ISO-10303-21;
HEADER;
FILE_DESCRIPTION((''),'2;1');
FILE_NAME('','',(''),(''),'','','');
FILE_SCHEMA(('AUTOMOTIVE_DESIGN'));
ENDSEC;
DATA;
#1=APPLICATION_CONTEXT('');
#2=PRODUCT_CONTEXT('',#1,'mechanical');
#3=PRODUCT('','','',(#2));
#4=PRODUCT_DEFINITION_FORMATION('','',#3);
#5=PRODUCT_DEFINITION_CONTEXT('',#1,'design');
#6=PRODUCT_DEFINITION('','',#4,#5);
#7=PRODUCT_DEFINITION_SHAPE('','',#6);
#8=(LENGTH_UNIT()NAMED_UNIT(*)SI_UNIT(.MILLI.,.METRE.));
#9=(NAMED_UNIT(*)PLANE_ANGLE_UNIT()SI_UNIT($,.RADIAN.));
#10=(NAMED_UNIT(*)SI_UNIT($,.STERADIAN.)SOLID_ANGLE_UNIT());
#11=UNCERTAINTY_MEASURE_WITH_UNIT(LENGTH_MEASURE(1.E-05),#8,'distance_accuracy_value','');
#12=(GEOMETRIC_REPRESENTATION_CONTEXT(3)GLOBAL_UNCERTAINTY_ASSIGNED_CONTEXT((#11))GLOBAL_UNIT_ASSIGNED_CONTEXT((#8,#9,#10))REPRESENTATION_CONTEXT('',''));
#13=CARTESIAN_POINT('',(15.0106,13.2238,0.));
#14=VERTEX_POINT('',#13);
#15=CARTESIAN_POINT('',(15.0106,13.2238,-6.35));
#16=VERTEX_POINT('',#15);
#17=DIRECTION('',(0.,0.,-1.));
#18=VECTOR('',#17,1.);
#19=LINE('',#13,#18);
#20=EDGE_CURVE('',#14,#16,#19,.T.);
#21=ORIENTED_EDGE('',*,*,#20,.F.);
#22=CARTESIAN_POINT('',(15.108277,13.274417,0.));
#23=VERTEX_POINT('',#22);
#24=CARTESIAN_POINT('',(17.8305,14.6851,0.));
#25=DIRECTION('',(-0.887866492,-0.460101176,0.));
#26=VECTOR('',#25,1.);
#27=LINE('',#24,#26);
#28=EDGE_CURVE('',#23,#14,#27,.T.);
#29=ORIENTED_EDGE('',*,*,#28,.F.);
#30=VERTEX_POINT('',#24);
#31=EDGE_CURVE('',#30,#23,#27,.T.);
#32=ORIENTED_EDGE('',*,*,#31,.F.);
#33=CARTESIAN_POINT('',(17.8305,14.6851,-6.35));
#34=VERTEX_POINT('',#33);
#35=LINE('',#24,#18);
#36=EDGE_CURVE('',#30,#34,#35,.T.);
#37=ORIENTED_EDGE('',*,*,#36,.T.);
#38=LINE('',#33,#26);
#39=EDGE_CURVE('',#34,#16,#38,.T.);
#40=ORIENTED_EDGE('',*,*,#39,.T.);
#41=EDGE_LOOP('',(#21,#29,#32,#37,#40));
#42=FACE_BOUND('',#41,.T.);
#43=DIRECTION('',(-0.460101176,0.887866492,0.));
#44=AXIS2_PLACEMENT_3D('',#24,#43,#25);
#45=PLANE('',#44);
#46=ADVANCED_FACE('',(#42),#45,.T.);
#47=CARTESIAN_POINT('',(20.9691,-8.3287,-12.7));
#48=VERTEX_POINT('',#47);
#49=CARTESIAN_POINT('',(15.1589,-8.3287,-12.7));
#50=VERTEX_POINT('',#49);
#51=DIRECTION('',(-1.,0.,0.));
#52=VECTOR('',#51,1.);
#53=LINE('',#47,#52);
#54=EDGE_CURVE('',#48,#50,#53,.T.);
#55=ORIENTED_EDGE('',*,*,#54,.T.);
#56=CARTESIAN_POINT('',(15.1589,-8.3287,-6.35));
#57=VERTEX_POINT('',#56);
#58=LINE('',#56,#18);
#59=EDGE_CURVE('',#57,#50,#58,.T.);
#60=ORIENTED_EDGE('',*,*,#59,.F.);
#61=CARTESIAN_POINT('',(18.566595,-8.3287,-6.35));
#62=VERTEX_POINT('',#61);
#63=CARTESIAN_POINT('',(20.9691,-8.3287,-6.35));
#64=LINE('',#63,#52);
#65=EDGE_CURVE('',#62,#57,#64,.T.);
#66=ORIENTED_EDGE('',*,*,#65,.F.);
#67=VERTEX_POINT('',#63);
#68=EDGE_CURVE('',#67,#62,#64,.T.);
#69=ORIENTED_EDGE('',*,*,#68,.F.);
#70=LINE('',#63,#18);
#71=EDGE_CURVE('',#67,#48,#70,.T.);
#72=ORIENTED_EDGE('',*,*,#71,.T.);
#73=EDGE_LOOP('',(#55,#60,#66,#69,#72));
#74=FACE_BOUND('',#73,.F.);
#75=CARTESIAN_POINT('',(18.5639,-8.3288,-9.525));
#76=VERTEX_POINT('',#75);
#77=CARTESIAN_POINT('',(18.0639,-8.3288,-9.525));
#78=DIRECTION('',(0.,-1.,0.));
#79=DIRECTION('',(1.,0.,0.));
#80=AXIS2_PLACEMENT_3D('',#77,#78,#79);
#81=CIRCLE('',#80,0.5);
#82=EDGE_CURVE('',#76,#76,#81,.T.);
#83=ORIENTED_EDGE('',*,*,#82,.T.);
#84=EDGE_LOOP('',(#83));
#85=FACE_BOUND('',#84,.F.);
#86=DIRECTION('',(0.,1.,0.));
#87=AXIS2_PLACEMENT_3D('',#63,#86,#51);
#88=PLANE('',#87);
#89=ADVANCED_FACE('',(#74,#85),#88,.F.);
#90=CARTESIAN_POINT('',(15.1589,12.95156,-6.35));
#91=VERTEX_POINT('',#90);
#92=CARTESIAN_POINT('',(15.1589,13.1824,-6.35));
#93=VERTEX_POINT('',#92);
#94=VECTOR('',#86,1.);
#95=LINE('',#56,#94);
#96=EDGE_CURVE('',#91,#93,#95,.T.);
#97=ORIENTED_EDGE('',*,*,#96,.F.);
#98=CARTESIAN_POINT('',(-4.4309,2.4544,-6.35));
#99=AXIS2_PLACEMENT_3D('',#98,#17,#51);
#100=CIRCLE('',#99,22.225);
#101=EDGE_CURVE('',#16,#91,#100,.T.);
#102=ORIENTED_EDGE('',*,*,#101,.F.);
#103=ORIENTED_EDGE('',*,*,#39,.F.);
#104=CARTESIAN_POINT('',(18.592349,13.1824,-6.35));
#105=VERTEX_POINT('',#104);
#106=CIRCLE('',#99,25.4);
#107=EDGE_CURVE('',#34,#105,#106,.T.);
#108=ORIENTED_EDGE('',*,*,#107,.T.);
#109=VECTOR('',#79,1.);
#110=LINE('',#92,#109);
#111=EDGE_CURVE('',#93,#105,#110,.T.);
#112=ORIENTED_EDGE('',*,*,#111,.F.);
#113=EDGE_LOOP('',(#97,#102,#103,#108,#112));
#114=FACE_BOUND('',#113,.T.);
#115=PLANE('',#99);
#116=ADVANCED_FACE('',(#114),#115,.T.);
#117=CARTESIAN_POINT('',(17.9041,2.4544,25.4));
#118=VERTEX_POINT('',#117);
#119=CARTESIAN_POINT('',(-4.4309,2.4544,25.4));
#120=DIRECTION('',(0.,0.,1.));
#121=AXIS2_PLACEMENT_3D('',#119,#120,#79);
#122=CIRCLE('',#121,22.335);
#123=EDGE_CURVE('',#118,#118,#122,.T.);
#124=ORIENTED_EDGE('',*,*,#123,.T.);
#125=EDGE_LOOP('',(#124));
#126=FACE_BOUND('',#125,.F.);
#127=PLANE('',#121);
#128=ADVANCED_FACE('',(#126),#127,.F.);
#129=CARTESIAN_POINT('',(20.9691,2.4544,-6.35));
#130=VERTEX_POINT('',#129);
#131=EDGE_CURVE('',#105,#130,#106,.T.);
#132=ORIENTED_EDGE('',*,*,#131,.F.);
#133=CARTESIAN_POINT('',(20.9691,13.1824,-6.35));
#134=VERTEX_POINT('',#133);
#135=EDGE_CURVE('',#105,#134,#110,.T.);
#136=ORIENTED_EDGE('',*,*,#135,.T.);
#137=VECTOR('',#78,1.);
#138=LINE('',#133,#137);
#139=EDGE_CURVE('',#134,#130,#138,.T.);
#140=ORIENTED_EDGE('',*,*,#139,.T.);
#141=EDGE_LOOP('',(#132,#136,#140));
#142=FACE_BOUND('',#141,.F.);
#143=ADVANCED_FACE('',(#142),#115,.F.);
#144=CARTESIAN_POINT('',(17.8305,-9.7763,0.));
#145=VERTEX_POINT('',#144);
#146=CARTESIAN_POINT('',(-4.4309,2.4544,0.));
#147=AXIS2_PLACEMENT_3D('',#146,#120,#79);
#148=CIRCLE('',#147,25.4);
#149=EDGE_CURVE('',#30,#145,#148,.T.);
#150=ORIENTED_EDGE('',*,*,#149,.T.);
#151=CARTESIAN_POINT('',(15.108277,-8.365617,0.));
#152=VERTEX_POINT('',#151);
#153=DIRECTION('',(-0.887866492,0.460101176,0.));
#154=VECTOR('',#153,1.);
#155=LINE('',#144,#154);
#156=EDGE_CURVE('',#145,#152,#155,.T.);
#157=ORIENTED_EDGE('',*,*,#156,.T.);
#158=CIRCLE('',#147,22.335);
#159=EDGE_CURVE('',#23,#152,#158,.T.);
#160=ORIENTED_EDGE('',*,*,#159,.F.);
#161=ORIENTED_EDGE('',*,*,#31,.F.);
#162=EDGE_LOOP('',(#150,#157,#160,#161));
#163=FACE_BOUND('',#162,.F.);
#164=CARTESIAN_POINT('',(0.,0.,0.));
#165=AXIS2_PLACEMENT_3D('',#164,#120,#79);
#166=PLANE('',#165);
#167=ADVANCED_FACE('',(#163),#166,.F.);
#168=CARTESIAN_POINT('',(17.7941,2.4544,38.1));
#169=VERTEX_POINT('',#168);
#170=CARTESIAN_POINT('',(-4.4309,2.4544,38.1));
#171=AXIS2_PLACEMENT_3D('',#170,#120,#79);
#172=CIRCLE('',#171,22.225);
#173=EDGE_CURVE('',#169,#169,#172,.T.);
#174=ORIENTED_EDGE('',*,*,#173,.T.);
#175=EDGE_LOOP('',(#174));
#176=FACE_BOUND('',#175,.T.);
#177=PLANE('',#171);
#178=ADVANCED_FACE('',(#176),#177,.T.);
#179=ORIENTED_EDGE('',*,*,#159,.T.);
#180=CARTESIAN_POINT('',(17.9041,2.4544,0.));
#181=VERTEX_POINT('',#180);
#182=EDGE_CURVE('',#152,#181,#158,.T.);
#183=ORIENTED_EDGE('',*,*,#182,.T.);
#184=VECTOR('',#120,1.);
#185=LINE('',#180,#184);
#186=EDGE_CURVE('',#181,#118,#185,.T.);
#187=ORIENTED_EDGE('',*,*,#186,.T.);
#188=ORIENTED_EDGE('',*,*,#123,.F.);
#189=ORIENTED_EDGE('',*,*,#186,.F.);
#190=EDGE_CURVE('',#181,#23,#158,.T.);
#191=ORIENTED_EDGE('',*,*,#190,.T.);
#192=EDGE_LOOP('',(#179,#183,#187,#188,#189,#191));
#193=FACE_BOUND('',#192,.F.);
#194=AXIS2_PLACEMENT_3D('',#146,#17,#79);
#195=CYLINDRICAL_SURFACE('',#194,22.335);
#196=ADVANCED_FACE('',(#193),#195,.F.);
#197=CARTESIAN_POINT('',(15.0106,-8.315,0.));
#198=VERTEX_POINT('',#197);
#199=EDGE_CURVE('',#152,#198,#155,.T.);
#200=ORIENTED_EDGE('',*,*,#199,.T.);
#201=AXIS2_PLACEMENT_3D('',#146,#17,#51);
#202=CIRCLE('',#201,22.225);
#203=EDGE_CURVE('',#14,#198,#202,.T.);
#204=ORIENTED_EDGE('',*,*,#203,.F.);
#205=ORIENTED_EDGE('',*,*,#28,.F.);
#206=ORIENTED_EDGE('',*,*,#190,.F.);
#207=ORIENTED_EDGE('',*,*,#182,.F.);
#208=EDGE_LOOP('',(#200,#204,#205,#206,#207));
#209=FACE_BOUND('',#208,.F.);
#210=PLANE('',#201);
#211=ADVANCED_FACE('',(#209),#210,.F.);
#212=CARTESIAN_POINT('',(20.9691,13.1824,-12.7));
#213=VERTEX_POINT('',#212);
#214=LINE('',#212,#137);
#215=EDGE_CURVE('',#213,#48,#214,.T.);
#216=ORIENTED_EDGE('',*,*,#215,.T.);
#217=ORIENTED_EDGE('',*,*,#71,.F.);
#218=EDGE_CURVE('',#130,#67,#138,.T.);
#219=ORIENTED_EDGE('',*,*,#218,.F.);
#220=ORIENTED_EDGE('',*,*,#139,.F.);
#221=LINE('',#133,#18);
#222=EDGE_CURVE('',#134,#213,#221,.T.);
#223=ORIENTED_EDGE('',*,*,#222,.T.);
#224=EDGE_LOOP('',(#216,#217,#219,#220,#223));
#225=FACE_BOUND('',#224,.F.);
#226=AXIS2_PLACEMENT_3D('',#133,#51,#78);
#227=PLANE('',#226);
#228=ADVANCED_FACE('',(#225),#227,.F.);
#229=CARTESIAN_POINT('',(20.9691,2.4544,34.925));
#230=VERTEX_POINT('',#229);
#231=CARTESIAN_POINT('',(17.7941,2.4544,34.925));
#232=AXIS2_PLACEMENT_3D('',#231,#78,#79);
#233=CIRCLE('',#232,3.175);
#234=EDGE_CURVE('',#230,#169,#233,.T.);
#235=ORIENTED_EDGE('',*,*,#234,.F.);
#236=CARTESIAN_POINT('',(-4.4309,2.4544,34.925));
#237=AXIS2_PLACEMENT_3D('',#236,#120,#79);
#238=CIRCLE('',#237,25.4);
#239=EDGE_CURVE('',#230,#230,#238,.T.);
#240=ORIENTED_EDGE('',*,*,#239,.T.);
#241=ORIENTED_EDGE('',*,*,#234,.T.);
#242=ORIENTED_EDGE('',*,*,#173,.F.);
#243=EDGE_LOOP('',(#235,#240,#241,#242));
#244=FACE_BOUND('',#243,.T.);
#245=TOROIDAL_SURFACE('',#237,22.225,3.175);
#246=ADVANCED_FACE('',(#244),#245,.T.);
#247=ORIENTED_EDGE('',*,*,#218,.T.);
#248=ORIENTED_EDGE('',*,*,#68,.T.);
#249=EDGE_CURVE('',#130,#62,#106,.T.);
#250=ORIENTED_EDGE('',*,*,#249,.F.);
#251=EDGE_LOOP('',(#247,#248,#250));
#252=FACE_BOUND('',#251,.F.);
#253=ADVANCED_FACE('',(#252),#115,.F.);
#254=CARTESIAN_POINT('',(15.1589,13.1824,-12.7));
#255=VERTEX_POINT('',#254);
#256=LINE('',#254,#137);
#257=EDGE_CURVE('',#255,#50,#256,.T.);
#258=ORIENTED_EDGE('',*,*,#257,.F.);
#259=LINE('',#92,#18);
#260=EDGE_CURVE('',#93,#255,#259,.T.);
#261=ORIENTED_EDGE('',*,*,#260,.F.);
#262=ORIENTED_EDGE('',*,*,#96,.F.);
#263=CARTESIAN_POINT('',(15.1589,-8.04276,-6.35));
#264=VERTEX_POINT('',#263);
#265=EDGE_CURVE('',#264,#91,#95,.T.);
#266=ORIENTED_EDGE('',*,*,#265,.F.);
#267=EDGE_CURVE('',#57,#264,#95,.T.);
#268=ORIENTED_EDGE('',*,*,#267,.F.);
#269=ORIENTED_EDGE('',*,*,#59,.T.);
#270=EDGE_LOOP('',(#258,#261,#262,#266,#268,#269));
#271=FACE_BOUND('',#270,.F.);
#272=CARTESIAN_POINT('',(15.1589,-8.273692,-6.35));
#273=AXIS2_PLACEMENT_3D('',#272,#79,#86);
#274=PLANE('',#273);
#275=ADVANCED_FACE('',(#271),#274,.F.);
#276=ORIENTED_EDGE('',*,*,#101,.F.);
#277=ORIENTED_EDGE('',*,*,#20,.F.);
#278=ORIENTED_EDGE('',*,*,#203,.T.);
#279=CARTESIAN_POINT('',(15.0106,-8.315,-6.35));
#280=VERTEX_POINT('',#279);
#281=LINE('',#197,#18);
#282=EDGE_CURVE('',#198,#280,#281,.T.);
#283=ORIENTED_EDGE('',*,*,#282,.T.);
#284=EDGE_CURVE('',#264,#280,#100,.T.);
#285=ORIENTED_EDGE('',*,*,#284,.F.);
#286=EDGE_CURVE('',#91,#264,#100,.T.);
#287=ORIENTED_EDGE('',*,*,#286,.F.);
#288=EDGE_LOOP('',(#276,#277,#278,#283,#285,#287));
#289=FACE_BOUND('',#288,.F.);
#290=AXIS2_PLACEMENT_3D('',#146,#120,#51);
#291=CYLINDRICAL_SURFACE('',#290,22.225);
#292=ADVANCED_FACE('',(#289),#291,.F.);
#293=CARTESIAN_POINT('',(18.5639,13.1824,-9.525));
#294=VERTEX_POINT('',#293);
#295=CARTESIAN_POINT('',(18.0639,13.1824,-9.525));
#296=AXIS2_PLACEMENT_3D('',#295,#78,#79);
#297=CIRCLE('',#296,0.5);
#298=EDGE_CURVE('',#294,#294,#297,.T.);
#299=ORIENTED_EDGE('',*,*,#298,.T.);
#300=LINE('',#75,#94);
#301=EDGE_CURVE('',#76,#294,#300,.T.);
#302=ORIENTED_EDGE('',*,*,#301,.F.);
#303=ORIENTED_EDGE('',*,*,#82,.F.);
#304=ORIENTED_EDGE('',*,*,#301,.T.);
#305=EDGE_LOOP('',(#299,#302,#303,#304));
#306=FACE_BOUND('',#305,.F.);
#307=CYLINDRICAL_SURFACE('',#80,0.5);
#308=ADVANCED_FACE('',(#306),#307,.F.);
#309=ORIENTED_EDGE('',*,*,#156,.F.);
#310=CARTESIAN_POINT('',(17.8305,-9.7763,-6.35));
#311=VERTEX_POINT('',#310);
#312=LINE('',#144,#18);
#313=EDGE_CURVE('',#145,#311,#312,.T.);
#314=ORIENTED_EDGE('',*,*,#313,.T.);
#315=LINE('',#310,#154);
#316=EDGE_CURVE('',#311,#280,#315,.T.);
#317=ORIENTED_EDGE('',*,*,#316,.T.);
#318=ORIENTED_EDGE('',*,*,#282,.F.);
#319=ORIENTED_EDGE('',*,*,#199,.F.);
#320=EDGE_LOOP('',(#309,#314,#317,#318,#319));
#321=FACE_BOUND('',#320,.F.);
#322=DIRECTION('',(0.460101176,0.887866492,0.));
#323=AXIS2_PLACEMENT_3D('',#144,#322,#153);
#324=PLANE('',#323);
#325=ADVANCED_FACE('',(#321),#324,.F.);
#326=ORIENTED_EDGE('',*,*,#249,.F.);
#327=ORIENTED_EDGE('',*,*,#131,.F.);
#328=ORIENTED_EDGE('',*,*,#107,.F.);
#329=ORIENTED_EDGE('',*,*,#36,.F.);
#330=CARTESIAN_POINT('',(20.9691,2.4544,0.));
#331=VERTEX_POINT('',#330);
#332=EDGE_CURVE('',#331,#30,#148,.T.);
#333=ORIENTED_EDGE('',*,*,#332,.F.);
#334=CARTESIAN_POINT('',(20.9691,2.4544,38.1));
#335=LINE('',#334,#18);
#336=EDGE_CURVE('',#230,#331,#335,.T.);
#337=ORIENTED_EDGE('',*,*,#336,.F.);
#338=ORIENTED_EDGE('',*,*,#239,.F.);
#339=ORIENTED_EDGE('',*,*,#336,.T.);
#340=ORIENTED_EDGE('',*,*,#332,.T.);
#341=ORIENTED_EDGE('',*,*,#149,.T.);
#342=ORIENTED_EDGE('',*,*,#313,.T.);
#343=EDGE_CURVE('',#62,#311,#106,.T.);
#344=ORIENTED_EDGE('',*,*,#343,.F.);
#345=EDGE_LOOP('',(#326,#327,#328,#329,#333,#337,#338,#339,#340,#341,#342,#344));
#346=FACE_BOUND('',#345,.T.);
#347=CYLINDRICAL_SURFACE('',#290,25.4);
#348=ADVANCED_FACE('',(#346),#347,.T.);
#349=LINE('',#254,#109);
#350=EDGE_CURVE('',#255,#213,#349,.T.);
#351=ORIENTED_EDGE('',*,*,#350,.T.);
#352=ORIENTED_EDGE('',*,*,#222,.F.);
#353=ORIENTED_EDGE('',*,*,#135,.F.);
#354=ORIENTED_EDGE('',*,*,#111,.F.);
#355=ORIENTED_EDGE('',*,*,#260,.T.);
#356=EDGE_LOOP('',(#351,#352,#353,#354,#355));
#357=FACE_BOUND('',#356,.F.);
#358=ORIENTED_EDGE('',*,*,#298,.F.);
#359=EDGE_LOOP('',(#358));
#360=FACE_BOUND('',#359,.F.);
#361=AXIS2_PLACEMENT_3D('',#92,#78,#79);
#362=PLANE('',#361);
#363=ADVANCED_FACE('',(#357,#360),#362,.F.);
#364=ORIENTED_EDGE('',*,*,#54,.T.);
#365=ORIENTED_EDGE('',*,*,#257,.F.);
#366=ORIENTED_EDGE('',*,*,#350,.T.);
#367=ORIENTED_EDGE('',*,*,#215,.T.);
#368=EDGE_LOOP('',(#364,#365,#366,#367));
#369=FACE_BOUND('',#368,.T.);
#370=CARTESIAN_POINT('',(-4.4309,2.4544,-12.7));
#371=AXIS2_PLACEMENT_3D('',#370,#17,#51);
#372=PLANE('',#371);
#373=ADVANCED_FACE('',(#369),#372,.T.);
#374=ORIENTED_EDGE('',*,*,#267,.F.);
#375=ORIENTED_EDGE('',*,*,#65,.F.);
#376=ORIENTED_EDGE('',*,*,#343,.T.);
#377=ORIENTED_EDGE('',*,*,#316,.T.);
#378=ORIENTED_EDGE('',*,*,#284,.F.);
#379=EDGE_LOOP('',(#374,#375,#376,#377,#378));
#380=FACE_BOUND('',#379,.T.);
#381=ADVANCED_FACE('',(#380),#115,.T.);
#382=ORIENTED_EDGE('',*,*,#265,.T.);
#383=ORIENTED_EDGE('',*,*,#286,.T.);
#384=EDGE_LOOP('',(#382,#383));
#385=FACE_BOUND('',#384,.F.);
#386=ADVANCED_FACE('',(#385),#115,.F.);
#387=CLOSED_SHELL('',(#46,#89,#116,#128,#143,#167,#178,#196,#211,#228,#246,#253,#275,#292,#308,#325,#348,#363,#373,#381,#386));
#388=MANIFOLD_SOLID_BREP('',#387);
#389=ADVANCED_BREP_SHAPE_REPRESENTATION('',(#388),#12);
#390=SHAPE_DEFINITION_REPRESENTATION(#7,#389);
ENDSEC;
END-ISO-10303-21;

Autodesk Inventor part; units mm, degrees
ref_plane "YZ Plane" through (0, 0, 0) normal (1, 0, 0) x (0, 1, 0)
ref_plane "XZ Plane" through (0, 0, 0) normal (0, 1, 0) x (-1, 0, 0)
ref_plane "XY Plane" through (0, 0, 0) normal (0, 0, 1) x (1, 0, 0)
sketch "Sketch1" plane through (0, 0, 0) normal (0, 0, 1) x (1, 0, 0)
  circle A0 centre (-4.4309, 2.4544) radius 22.335
  circle A1 centre (-4.4309, 2.4544) radius 25.4
  point P0 (0, 0)
  dimension "d0" = 44.67
  dimension "d1" = 50.8
extrude "Extrusion1" add sketch "Sketch1" along normal blind 25.4
sketch "Sketch2" plane through (-4.4309, 2.4544, 25.4) normal (0, 0, 1) x (1, 0, 0)
  circle A0 centre (0, 0) radius 25.4
  point P0 (4.4309, -2.4544)
extrude "Extrusion2" add sketch "Sketch2" along normal blind 12.7
fillet "Fillet1" radius 3.175 1 edges at (-29.8309, 2.4544, 38.1)
sketch "Sketch3" plane through (-4.4309, 2.4544, 0) normal (0, 0, -1) x (-1, 0, 0)
  circle A0 centre (0, 0) radius 25.4 projected
  arc A1 (-22.2614, 12.2307) -> (-22.2614, -12.2307) centre (0, 0) ccw
  line L0 (-22.2614, 12.2307) -> (-22.2614, -12.2307) construction
  line L1 (-22.2614, 12.2307) -> (2.1999, 12.2307) construction
  circle A2 centre (0, 0) radius 22.225 projected
  arc A3 (-19.4415, 10.7694) -> (-19.4415, -10.7694) centre (0, 0) ccw
  line L2 (-19.4415, 10.7694) -> (-19.4415, -10.7694) construction
  line L3 (-19.4415, 10.7694) -> (2.0972, 10.7694) construction
  line L4 (-22.2614, -12.2307) -> (-19.4415, -10.7694)
  line L5 (-22.2614, 12.2307) -> (-19.4415, 10.7694)
  point P0 (-4.4309, -2.4544)
  dimension "d7" = 90
  dimension "d8" = 90
extrude "Extrusion3" add sketch "Sketch3" along normal blind 6.35 contours L5 A2 L4 A0 picked at (-24.2184, -0.7482)
sketch "Sketch4" plane through (-4.4309, 2.4544, -6.35) normal (0, 0, -1) x (-1, 0, 0)
  circle A0 centre (0, 0) radius 22.335 projected
  line L0 (-19.5898, 10.728) -> (-25.4, 10.728)
  line L1 (-25.4, 10.728) -> (-25.4, -10.7831)
  line L2 (-25.4, -10.7831) -> (-19.5898, -10.7831)
  line L3 (-19.5898, -10.7831) -> (-19.5898, 10.728)
  point P0 (-4.4309, -2.4544)
extrude "Extrusion4" add sketch "Sketch4" along normal blind 6.35 contours L3 A0 | A0 L3 L2 L1 L0 picked at (-20.171, -2.2046)
sketch "Sketch5" plane through (-4.4309, 2.4544, -6.35) normal (0, 0, -1) x (-1, 0, 0)
  point P0 (-4.4309, -2.4544)
sketch "Sketch6" plane through (18.5665, -8.3288, -6.35) normal (0, -1, 0) x (1, 0, 0)
  line L0 (-3.4076, -6.35) -> (2.4025, -6.35) projected
  line L1 (-3.4076, 0) -> (0, 0) projected
  line L2 (2.4025, -6.35) -> (-3.4076, 0) construction
  line L3 (-3.4076, -6.35) -> (2.4025, 0) construction
  line L4 (2.4025, 0) -> (2.4025, 41.275) projected
  circle A0 centre (-0.5026, -3.175) radius 0.5
  point P0 (-18.5665, 6.35)
  dimension "d13" = 1
extrude "Extrusion5" cut sketch "Sketch6" against normal blind 25.4
properties part number "ballcarriage"
